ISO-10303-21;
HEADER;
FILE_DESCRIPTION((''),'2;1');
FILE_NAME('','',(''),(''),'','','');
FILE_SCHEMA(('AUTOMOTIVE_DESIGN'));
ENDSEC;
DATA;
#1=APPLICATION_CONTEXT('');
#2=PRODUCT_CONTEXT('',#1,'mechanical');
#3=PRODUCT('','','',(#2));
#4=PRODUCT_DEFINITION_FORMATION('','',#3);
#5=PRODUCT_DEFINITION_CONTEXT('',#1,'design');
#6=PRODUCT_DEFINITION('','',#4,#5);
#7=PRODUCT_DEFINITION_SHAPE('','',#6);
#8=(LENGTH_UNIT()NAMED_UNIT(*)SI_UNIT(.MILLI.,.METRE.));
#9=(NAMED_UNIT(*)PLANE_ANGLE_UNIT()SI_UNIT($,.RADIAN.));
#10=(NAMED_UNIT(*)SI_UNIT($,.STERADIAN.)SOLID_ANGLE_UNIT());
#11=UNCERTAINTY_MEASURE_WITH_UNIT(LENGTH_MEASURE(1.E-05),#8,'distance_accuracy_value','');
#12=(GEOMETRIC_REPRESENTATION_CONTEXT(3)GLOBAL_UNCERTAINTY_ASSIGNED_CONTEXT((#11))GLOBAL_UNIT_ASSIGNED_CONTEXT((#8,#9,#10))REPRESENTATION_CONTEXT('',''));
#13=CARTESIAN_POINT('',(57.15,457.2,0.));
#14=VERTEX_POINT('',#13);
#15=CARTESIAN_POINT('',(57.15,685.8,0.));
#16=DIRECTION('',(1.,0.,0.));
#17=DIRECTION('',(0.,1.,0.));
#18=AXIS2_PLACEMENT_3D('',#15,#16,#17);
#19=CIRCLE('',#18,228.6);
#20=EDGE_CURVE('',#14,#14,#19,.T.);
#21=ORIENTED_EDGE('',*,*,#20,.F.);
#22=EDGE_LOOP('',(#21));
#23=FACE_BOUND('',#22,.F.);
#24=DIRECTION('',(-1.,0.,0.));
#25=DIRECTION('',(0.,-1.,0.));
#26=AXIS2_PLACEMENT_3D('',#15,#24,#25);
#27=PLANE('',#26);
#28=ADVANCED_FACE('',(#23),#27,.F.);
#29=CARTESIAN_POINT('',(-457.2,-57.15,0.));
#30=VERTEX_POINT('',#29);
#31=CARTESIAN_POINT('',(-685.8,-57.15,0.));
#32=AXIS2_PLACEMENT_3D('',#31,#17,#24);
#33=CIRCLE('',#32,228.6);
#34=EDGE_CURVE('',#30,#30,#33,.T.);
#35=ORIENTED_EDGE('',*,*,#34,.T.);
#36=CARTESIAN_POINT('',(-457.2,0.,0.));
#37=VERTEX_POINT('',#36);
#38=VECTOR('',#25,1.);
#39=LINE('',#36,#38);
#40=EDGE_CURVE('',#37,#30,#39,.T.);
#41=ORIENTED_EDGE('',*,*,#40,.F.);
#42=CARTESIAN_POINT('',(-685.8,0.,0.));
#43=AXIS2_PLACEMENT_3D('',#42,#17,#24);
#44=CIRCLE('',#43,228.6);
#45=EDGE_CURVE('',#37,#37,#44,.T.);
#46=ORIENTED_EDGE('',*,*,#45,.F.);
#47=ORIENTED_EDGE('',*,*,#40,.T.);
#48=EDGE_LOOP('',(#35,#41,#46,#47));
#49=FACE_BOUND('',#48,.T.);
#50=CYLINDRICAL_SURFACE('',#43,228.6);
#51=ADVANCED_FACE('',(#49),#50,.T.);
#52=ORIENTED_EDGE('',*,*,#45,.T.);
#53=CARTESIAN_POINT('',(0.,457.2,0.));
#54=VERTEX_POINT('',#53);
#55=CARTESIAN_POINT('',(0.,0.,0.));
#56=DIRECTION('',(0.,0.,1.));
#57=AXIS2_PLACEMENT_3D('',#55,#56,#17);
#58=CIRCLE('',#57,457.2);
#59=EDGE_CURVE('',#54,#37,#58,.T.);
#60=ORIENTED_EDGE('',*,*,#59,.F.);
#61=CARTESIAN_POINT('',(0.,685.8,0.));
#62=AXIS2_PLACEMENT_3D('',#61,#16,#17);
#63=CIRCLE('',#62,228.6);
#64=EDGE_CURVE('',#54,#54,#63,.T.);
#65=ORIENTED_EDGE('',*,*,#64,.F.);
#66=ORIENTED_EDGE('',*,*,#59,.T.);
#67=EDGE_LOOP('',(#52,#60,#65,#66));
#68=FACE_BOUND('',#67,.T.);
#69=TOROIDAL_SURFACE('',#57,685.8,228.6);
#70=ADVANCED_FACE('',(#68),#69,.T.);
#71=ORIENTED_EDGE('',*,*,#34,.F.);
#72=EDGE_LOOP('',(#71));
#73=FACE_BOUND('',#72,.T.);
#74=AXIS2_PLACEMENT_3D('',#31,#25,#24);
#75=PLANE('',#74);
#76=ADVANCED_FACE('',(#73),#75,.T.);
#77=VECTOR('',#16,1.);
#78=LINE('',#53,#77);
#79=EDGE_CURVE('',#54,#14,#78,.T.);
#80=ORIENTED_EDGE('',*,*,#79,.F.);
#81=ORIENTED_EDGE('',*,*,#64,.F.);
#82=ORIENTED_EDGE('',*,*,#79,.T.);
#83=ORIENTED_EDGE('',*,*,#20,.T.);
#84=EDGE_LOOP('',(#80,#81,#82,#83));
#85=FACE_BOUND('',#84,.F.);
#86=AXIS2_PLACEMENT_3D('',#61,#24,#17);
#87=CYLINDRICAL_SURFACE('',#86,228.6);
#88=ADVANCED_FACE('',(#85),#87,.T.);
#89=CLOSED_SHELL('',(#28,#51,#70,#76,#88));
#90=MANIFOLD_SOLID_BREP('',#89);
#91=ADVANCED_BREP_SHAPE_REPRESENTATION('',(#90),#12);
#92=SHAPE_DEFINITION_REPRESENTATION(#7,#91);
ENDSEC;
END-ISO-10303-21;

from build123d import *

# Parameters (mm, degrees)
F0_R     = 228.6
F3_DEPTH = 57.15
F4_DEPTH = 57.15


with BuildPart() as f2:
    # F2: sweep along a path in F1
    with BuildLine(Plane.XY) as f2_path:
        ThreePointArc((0, 457.2), (-323.2892203585, 323.2892203585), (-457.2, 0))
    # F0 (on Front) → F2 (sweep)
    with BuildSketch(Plane.XZ):
        with Locations((-685.8, 0)):
            Circle(F0_R)
    sweep(path=f2_path.line)

    # F3 (add): a face of the model
    f3_faces = [f2.faces().sort_by_distance(p)[0] for p in [
        (-685.8, 0, 0),
    ]]
    extrude(f3_faces, amount=F3_DEPTH)

    # F4 (add): a face of the model
    f4_faces = [f2.faces().sort_by_distance(p)[0] for p in [
        (0, 685.8, 0),
    ]]
    extrude(f4_faces, amount=F4_DEPTH)


solid = f2.part
